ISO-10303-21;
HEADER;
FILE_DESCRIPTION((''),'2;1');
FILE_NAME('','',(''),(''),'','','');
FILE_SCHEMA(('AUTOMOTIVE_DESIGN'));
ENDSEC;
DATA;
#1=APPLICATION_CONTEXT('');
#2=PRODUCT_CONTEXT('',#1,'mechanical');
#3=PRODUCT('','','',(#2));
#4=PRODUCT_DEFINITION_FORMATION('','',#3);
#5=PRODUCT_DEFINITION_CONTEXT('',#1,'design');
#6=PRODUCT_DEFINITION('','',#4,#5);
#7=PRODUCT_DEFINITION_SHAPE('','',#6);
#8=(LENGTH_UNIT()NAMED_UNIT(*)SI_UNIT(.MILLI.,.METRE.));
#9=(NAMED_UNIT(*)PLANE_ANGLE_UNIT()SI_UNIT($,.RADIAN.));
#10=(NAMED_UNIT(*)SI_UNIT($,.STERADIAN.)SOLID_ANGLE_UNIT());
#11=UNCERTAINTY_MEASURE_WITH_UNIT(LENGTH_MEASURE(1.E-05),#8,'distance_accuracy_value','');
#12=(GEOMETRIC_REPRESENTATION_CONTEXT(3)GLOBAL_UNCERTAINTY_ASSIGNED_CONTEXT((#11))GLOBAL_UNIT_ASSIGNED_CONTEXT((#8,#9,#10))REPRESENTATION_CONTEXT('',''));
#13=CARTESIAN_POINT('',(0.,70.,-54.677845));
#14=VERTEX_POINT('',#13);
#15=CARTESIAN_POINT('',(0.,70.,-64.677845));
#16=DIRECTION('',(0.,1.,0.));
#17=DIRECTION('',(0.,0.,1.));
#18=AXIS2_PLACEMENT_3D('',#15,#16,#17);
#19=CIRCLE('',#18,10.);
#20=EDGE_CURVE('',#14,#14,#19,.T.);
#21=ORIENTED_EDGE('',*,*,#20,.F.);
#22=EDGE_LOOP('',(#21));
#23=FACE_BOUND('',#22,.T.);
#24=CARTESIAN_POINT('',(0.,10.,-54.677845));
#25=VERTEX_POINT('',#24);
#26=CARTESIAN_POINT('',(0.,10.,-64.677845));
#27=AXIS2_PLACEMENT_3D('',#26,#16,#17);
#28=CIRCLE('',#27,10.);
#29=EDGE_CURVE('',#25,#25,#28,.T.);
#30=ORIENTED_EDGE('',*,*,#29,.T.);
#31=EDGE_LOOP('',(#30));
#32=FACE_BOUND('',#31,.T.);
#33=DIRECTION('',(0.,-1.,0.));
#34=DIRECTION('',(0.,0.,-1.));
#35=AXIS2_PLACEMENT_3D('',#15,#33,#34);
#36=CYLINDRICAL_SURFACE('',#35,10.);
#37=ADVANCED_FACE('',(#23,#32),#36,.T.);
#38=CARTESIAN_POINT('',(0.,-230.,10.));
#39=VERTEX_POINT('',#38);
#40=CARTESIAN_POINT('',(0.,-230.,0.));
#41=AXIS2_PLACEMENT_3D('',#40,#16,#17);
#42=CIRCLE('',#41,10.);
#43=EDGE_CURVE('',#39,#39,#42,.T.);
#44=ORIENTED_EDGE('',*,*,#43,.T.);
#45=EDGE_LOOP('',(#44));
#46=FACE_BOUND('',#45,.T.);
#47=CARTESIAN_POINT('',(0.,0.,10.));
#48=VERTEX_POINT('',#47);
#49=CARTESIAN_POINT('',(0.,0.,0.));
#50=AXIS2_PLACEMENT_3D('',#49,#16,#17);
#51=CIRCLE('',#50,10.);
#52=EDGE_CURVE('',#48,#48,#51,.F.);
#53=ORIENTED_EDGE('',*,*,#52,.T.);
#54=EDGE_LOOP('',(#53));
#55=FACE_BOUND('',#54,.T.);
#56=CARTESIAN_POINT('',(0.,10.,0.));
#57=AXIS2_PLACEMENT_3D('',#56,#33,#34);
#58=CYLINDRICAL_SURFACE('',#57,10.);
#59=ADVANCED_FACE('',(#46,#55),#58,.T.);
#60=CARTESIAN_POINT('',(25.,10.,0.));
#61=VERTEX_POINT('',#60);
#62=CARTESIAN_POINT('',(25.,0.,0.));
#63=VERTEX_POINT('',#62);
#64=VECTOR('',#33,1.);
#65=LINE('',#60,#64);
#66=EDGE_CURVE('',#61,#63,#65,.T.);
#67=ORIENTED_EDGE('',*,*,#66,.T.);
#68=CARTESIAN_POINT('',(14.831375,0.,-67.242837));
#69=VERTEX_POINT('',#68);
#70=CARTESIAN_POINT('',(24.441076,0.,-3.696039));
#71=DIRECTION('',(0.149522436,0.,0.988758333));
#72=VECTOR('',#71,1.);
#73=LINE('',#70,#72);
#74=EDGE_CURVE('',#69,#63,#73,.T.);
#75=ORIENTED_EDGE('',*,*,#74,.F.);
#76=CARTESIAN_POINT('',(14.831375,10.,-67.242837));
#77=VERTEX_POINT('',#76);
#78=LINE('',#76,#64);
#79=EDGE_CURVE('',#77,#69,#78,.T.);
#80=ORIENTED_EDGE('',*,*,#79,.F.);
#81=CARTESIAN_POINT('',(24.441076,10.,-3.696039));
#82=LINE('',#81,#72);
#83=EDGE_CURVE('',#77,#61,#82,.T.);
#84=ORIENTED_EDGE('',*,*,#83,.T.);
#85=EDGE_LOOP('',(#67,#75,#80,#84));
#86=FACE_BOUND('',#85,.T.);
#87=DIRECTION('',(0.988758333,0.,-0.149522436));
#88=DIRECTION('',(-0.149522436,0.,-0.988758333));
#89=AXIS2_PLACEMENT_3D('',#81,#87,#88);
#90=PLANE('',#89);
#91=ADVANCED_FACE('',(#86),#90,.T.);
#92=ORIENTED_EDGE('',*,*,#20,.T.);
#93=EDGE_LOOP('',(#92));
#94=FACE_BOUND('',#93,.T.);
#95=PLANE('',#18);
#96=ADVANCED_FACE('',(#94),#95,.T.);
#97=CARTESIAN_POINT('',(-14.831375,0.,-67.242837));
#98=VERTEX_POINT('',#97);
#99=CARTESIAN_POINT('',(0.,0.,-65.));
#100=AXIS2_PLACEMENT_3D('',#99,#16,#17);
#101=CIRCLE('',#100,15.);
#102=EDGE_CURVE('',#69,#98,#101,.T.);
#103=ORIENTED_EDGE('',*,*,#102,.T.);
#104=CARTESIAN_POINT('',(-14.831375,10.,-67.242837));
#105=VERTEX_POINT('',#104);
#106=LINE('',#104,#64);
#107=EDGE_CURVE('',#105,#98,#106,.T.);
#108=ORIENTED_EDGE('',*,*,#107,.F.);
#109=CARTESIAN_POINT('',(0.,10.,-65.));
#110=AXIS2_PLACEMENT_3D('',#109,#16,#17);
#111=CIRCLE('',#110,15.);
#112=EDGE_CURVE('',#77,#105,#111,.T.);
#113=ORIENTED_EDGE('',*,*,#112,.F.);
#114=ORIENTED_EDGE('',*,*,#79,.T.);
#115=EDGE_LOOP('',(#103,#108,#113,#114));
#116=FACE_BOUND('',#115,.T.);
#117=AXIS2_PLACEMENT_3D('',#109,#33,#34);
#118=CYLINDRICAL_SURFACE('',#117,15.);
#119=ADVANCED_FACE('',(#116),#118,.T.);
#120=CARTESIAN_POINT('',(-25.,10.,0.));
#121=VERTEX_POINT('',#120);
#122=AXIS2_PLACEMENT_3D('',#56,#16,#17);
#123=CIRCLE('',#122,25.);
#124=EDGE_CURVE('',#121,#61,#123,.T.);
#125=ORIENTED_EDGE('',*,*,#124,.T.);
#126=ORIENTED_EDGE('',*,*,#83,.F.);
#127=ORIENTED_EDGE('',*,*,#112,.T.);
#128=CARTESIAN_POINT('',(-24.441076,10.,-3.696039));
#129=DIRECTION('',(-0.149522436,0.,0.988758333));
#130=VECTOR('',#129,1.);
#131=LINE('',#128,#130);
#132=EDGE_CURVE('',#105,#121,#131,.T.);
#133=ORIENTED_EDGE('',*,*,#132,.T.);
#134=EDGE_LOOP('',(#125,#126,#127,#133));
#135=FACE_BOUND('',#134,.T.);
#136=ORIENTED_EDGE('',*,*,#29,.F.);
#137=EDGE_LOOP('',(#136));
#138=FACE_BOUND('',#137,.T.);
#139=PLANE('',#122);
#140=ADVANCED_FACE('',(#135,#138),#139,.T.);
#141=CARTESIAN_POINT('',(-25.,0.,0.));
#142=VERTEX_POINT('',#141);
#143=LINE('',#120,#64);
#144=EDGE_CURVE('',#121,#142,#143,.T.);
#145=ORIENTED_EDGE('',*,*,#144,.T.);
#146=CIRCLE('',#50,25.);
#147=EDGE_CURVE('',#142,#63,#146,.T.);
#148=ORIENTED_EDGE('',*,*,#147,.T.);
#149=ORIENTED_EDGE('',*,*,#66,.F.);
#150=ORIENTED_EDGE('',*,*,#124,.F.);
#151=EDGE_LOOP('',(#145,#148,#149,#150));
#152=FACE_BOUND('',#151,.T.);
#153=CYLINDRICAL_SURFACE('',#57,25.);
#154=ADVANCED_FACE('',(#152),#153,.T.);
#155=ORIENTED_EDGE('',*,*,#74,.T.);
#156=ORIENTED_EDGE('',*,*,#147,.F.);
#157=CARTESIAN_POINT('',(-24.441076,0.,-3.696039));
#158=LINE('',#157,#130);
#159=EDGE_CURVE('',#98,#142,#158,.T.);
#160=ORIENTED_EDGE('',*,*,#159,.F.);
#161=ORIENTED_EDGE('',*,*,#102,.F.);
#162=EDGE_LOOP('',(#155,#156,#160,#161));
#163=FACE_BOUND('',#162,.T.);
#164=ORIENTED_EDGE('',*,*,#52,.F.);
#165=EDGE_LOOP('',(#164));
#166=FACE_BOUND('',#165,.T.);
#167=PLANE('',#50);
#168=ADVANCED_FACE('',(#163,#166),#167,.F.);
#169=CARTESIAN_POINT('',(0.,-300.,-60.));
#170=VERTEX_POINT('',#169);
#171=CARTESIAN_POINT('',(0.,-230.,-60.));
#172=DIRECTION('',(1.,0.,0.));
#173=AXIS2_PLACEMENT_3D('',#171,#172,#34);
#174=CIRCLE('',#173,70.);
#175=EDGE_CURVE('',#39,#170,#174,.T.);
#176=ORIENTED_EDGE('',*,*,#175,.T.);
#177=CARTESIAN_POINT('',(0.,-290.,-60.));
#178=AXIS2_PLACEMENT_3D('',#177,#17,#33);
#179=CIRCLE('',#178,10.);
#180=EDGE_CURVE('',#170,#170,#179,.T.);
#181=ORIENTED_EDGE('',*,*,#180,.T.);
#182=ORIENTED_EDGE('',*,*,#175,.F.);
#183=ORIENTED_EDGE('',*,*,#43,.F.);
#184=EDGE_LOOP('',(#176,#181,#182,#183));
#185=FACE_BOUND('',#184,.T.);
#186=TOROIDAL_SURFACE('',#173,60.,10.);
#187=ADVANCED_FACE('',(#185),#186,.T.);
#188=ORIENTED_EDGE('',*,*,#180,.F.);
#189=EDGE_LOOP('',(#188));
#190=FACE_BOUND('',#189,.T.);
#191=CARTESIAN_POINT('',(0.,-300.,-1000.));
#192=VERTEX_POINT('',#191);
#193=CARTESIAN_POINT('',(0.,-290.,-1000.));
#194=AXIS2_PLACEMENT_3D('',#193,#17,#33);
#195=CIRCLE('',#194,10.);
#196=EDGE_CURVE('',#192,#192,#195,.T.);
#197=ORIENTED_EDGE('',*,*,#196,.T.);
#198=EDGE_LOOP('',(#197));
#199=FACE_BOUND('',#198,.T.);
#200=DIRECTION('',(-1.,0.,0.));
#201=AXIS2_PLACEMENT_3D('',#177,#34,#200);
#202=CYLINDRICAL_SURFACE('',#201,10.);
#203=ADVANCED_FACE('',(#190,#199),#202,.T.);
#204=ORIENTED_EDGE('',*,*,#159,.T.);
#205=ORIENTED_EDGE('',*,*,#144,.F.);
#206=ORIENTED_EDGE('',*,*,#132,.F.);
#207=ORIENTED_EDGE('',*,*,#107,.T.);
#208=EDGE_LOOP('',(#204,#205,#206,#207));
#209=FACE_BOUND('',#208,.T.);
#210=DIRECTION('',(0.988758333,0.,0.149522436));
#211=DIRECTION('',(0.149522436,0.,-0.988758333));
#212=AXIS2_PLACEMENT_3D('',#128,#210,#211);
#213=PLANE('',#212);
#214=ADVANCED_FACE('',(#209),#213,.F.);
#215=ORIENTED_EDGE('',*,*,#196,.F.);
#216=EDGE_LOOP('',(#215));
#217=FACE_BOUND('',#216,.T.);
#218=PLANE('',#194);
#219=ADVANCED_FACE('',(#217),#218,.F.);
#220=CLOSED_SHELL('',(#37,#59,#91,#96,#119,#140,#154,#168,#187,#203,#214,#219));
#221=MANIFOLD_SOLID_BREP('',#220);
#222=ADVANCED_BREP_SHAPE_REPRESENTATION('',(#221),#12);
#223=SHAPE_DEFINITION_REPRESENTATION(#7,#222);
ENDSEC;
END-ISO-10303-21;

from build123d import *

# Parameters (mm, degrees)
SKETCH1_R           = 10
BOSS_EXTRUDE1_DEPTH = 10
SKETCH2_R           = 10
BOSS_EXTRUDE2_DEPTH = 60
SWEEP1_START        = -1000
SWEEP1_OUTLINE_R    = 10
SWEEP1_DEPTH        = 940
SWEEP1_START_2      = -230.0000001
SWEEP1_2_OUTLINE_R  = 10
SWEEP1_2_DEPTH      = 240.0000001
SWEEP1_3_OUTLINE_R  = 10
SWEEP1_3_ANGLE      = 90


with BuildPart() as part:
    # Sketch1 → Boss-Extrude1 (new body)
    with BuildSketch(Plane(origin=(0, 0, 0), x_dir=(1, 0, 0), z_dir=(0, 1, 0))):
        with BuildLine():
            ThreePointArc((14.831374996, 67.242836537), (0, 80), (-14.831374996, 67.242836537))
            Line((-14.831374996, 67.242836537), (-23.88215206, 7.392077718))
            Line((-23.88215206, 7.392077718), (-25, 0))
            ThreePointArc((-25, 0), (0, -25), (25, 0))
            Line((25, 0), (23.88215206, 7.392077718))
            Line((23.88215206, 7.392077718), (14.831374996, 67.242836537))
        make_face()
        with Locations(Location((0, 0, 0), (0, 0, 270))):
            Circle(SKETCH1_R, mode=Mode.SUBTRACT)
    extrude(amount=BOSS_EXTRUDE1_DEPTH)

    # Sketch2 → Boss-Extrude2 (add)
    with BuildSketch(Plane(origin=(0, 10, 0), x_dir=(1, 0, 0), z_dir=(0, 1, 0))):
        with Locations(Location((0, 64.677844525, 0), (0, 0, 270))):
            Circle(SKETCH2_R)
    extrude(amount=BOSS_EXTRUDE2_DEPTH)

    # Sweep1 2 outline → Sweep1 2 (add)
    with BuildSketch(Plane(origin=(0, 0, 0), x_dir=(1, 0, 0), z_dir=(0, 1, 0)).offset(SWEEP1_START_2)):
        Circle(SWEEP1_2_OUTLINE_R)
    extrude(amount=SWEEP1_2_DEPTH)



with BuildPart() as body_2:
    # Sweep1: read off the stored shape, not the designer's step
    # Sweep1 outline → Sweep1 (new body)
    with BuildSketch(Plane.XY.offset(SWEEP1_START)):
        with Locations((0, -290)):
            Circle(SWEEP1_OUTLINE_R)
    extrude(amount=SWEEP1_DEPTH)


with BuildPart() as part_1:
    add(part.part)

    add(body_2.part)  # Sweep1 3 merges body 2
    # Sweep1 3 outline → Sweep1 3 (revolve)
    with BuildSketch(Plane(origin=(0, -230, -60), x_dir=(0, 0, 1), z_dir=(0, 1, 0))):
        with Locations((60, 0)):
            Circle(SWEEP1_3_OUTLINE_R)
    revolve(axis=Axis((0, -230, -60), (1, 0, 0)), revolution_arc=SWEEP1_3_ANGLE)


solid = part_1.part
